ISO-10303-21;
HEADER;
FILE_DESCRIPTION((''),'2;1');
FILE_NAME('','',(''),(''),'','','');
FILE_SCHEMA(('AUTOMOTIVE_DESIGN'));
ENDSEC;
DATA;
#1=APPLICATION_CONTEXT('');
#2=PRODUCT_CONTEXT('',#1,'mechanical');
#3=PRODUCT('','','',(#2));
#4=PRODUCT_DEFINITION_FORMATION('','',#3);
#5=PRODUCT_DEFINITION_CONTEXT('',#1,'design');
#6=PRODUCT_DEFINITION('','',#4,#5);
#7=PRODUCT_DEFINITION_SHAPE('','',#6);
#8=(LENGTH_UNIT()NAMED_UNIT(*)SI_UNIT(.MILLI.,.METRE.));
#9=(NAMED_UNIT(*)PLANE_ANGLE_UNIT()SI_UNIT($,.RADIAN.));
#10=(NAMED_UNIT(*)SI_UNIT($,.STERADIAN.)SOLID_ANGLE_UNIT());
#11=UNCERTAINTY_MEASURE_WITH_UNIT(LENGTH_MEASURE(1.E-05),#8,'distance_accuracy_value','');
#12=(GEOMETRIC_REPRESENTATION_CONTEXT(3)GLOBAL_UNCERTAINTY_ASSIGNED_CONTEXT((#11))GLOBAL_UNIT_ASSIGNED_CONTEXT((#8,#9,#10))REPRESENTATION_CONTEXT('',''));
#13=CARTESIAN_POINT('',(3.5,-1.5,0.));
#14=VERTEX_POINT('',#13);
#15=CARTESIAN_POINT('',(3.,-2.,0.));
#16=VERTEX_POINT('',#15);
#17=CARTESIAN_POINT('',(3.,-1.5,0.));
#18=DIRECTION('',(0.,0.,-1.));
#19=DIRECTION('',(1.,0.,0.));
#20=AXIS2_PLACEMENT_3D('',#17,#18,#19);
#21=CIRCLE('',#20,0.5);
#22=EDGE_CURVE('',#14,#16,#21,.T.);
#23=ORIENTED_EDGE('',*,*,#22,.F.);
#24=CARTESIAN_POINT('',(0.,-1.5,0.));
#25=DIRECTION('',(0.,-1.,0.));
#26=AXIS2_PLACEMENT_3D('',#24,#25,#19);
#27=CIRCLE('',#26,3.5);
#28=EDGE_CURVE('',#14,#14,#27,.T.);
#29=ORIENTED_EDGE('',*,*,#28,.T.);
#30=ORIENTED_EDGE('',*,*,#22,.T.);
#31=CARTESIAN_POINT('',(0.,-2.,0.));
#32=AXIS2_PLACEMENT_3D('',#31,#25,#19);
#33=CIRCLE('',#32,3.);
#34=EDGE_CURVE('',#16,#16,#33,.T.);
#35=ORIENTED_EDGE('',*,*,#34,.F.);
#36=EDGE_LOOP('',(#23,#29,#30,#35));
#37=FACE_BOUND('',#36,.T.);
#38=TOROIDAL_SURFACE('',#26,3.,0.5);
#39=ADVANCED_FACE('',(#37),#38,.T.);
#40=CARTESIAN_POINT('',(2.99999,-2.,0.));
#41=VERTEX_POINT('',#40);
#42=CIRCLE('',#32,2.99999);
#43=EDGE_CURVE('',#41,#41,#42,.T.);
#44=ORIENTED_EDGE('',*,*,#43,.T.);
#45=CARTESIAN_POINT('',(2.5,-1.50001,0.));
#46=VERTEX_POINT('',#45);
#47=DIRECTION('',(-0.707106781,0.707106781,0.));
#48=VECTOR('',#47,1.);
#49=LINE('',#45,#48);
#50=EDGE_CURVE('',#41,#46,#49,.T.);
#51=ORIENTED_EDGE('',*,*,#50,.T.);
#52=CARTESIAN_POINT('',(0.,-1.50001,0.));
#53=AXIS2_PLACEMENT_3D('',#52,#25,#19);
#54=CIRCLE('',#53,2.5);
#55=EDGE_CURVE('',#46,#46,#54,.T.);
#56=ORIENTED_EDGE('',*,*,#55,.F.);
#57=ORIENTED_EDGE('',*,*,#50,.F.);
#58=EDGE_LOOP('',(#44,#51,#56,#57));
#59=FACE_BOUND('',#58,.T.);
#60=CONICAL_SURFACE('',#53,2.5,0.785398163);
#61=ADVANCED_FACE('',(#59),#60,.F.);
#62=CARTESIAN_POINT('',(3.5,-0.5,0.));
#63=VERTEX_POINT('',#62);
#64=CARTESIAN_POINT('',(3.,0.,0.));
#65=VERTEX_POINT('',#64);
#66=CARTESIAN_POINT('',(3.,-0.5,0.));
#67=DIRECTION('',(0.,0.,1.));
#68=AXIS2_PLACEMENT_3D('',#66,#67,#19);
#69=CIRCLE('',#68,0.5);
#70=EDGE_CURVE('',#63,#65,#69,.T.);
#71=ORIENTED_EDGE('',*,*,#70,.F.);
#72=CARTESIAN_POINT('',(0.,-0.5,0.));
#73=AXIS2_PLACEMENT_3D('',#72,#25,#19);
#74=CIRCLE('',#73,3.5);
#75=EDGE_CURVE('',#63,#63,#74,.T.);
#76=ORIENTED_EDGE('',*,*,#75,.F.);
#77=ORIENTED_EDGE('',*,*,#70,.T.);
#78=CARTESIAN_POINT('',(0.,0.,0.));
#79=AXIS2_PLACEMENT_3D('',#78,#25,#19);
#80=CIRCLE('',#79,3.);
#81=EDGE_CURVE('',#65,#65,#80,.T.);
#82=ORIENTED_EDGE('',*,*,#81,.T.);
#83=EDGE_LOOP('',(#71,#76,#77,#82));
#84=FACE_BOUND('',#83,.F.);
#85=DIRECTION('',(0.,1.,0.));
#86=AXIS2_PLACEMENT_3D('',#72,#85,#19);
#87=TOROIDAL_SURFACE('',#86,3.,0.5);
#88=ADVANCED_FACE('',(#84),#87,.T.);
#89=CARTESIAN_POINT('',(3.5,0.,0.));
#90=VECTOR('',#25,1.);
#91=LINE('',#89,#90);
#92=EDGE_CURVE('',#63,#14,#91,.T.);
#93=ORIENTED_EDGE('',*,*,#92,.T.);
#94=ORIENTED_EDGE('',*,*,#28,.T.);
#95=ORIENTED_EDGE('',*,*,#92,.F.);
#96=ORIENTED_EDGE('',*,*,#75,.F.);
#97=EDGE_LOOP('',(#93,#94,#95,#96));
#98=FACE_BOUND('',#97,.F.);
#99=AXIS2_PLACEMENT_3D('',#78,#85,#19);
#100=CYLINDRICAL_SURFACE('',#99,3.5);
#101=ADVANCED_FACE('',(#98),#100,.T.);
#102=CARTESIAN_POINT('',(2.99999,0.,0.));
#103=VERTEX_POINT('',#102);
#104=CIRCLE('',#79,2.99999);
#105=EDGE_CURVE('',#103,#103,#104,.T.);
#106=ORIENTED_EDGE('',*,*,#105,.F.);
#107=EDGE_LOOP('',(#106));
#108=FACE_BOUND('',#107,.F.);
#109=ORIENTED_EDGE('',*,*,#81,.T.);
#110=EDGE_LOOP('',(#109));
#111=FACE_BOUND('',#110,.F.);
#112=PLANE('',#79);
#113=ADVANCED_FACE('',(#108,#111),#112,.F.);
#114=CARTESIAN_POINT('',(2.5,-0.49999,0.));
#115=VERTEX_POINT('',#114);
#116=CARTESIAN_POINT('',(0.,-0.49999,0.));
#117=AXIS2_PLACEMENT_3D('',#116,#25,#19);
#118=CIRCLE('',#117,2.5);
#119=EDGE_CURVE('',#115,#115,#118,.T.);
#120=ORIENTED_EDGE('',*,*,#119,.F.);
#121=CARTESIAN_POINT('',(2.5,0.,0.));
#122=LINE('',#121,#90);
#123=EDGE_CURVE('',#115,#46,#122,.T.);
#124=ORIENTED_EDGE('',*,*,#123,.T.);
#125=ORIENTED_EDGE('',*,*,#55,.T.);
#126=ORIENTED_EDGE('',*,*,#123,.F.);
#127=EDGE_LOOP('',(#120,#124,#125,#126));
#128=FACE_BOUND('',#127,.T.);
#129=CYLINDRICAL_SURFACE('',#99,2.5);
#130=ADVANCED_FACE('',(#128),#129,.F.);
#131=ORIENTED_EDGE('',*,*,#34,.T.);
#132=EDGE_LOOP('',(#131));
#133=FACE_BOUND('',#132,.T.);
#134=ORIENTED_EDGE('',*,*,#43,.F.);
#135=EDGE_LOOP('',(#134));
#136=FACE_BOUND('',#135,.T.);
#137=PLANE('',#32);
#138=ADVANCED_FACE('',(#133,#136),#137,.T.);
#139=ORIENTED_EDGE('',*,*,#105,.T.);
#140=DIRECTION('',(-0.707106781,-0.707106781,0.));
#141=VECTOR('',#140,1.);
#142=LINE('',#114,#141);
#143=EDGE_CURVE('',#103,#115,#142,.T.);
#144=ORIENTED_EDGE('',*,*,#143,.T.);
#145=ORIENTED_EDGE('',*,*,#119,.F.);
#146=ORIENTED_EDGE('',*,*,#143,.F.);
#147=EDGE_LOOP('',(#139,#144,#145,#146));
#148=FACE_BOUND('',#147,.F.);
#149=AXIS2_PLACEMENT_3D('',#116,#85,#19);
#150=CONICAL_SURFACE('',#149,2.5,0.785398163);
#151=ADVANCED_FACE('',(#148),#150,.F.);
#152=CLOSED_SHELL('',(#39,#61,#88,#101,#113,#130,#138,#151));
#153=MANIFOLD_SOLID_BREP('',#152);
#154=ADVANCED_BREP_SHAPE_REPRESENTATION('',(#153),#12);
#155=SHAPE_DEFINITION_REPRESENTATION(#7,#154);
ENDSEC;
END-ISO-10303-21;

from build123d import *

# Parameters (mm, degrees)
F0_R     = 3.5
F0_R_2   = 2.5
F1_DEPTH = 2
F2_R     = 0.5
F3_SIZE  = 0.49999


# Not quite as in the source:
# - a fillet or chamfer is up to 0.001 mm smaller than in the source, because OpenCascade refuses the exact size


with BuildPart() as f1:
    # F0 (on Front) → F1 (new body)
    with BuildSketch(Plane.XZ):
        Circle(F0_R)
        Circle(F0_R_2, mode=Mode.SUBTRACT)
    extrude(amount=F1_DEPTH)

    # F2
    f2_edges = [f1.edges().sort_by_distance(p)[0] for p in [
        (-3.5, -2, 0),
        (3.5, -1, 0),
        (-3.5, 0, 0),
    ]]
    fillet(f2_edges, radius=F2_R)

    # F3 (size 0.5 in the source; OpenCascade refuses exactly that, so slightly less here)
    f3_edges = [f1.edges().sort_by_distance(p)[0] for p in [
        (-2.5, -2, 0),
        (-2.5, 0, 0),
    ]]
    chamfer(f3_edges, length=F3_SIZE)


solid = f1.part
